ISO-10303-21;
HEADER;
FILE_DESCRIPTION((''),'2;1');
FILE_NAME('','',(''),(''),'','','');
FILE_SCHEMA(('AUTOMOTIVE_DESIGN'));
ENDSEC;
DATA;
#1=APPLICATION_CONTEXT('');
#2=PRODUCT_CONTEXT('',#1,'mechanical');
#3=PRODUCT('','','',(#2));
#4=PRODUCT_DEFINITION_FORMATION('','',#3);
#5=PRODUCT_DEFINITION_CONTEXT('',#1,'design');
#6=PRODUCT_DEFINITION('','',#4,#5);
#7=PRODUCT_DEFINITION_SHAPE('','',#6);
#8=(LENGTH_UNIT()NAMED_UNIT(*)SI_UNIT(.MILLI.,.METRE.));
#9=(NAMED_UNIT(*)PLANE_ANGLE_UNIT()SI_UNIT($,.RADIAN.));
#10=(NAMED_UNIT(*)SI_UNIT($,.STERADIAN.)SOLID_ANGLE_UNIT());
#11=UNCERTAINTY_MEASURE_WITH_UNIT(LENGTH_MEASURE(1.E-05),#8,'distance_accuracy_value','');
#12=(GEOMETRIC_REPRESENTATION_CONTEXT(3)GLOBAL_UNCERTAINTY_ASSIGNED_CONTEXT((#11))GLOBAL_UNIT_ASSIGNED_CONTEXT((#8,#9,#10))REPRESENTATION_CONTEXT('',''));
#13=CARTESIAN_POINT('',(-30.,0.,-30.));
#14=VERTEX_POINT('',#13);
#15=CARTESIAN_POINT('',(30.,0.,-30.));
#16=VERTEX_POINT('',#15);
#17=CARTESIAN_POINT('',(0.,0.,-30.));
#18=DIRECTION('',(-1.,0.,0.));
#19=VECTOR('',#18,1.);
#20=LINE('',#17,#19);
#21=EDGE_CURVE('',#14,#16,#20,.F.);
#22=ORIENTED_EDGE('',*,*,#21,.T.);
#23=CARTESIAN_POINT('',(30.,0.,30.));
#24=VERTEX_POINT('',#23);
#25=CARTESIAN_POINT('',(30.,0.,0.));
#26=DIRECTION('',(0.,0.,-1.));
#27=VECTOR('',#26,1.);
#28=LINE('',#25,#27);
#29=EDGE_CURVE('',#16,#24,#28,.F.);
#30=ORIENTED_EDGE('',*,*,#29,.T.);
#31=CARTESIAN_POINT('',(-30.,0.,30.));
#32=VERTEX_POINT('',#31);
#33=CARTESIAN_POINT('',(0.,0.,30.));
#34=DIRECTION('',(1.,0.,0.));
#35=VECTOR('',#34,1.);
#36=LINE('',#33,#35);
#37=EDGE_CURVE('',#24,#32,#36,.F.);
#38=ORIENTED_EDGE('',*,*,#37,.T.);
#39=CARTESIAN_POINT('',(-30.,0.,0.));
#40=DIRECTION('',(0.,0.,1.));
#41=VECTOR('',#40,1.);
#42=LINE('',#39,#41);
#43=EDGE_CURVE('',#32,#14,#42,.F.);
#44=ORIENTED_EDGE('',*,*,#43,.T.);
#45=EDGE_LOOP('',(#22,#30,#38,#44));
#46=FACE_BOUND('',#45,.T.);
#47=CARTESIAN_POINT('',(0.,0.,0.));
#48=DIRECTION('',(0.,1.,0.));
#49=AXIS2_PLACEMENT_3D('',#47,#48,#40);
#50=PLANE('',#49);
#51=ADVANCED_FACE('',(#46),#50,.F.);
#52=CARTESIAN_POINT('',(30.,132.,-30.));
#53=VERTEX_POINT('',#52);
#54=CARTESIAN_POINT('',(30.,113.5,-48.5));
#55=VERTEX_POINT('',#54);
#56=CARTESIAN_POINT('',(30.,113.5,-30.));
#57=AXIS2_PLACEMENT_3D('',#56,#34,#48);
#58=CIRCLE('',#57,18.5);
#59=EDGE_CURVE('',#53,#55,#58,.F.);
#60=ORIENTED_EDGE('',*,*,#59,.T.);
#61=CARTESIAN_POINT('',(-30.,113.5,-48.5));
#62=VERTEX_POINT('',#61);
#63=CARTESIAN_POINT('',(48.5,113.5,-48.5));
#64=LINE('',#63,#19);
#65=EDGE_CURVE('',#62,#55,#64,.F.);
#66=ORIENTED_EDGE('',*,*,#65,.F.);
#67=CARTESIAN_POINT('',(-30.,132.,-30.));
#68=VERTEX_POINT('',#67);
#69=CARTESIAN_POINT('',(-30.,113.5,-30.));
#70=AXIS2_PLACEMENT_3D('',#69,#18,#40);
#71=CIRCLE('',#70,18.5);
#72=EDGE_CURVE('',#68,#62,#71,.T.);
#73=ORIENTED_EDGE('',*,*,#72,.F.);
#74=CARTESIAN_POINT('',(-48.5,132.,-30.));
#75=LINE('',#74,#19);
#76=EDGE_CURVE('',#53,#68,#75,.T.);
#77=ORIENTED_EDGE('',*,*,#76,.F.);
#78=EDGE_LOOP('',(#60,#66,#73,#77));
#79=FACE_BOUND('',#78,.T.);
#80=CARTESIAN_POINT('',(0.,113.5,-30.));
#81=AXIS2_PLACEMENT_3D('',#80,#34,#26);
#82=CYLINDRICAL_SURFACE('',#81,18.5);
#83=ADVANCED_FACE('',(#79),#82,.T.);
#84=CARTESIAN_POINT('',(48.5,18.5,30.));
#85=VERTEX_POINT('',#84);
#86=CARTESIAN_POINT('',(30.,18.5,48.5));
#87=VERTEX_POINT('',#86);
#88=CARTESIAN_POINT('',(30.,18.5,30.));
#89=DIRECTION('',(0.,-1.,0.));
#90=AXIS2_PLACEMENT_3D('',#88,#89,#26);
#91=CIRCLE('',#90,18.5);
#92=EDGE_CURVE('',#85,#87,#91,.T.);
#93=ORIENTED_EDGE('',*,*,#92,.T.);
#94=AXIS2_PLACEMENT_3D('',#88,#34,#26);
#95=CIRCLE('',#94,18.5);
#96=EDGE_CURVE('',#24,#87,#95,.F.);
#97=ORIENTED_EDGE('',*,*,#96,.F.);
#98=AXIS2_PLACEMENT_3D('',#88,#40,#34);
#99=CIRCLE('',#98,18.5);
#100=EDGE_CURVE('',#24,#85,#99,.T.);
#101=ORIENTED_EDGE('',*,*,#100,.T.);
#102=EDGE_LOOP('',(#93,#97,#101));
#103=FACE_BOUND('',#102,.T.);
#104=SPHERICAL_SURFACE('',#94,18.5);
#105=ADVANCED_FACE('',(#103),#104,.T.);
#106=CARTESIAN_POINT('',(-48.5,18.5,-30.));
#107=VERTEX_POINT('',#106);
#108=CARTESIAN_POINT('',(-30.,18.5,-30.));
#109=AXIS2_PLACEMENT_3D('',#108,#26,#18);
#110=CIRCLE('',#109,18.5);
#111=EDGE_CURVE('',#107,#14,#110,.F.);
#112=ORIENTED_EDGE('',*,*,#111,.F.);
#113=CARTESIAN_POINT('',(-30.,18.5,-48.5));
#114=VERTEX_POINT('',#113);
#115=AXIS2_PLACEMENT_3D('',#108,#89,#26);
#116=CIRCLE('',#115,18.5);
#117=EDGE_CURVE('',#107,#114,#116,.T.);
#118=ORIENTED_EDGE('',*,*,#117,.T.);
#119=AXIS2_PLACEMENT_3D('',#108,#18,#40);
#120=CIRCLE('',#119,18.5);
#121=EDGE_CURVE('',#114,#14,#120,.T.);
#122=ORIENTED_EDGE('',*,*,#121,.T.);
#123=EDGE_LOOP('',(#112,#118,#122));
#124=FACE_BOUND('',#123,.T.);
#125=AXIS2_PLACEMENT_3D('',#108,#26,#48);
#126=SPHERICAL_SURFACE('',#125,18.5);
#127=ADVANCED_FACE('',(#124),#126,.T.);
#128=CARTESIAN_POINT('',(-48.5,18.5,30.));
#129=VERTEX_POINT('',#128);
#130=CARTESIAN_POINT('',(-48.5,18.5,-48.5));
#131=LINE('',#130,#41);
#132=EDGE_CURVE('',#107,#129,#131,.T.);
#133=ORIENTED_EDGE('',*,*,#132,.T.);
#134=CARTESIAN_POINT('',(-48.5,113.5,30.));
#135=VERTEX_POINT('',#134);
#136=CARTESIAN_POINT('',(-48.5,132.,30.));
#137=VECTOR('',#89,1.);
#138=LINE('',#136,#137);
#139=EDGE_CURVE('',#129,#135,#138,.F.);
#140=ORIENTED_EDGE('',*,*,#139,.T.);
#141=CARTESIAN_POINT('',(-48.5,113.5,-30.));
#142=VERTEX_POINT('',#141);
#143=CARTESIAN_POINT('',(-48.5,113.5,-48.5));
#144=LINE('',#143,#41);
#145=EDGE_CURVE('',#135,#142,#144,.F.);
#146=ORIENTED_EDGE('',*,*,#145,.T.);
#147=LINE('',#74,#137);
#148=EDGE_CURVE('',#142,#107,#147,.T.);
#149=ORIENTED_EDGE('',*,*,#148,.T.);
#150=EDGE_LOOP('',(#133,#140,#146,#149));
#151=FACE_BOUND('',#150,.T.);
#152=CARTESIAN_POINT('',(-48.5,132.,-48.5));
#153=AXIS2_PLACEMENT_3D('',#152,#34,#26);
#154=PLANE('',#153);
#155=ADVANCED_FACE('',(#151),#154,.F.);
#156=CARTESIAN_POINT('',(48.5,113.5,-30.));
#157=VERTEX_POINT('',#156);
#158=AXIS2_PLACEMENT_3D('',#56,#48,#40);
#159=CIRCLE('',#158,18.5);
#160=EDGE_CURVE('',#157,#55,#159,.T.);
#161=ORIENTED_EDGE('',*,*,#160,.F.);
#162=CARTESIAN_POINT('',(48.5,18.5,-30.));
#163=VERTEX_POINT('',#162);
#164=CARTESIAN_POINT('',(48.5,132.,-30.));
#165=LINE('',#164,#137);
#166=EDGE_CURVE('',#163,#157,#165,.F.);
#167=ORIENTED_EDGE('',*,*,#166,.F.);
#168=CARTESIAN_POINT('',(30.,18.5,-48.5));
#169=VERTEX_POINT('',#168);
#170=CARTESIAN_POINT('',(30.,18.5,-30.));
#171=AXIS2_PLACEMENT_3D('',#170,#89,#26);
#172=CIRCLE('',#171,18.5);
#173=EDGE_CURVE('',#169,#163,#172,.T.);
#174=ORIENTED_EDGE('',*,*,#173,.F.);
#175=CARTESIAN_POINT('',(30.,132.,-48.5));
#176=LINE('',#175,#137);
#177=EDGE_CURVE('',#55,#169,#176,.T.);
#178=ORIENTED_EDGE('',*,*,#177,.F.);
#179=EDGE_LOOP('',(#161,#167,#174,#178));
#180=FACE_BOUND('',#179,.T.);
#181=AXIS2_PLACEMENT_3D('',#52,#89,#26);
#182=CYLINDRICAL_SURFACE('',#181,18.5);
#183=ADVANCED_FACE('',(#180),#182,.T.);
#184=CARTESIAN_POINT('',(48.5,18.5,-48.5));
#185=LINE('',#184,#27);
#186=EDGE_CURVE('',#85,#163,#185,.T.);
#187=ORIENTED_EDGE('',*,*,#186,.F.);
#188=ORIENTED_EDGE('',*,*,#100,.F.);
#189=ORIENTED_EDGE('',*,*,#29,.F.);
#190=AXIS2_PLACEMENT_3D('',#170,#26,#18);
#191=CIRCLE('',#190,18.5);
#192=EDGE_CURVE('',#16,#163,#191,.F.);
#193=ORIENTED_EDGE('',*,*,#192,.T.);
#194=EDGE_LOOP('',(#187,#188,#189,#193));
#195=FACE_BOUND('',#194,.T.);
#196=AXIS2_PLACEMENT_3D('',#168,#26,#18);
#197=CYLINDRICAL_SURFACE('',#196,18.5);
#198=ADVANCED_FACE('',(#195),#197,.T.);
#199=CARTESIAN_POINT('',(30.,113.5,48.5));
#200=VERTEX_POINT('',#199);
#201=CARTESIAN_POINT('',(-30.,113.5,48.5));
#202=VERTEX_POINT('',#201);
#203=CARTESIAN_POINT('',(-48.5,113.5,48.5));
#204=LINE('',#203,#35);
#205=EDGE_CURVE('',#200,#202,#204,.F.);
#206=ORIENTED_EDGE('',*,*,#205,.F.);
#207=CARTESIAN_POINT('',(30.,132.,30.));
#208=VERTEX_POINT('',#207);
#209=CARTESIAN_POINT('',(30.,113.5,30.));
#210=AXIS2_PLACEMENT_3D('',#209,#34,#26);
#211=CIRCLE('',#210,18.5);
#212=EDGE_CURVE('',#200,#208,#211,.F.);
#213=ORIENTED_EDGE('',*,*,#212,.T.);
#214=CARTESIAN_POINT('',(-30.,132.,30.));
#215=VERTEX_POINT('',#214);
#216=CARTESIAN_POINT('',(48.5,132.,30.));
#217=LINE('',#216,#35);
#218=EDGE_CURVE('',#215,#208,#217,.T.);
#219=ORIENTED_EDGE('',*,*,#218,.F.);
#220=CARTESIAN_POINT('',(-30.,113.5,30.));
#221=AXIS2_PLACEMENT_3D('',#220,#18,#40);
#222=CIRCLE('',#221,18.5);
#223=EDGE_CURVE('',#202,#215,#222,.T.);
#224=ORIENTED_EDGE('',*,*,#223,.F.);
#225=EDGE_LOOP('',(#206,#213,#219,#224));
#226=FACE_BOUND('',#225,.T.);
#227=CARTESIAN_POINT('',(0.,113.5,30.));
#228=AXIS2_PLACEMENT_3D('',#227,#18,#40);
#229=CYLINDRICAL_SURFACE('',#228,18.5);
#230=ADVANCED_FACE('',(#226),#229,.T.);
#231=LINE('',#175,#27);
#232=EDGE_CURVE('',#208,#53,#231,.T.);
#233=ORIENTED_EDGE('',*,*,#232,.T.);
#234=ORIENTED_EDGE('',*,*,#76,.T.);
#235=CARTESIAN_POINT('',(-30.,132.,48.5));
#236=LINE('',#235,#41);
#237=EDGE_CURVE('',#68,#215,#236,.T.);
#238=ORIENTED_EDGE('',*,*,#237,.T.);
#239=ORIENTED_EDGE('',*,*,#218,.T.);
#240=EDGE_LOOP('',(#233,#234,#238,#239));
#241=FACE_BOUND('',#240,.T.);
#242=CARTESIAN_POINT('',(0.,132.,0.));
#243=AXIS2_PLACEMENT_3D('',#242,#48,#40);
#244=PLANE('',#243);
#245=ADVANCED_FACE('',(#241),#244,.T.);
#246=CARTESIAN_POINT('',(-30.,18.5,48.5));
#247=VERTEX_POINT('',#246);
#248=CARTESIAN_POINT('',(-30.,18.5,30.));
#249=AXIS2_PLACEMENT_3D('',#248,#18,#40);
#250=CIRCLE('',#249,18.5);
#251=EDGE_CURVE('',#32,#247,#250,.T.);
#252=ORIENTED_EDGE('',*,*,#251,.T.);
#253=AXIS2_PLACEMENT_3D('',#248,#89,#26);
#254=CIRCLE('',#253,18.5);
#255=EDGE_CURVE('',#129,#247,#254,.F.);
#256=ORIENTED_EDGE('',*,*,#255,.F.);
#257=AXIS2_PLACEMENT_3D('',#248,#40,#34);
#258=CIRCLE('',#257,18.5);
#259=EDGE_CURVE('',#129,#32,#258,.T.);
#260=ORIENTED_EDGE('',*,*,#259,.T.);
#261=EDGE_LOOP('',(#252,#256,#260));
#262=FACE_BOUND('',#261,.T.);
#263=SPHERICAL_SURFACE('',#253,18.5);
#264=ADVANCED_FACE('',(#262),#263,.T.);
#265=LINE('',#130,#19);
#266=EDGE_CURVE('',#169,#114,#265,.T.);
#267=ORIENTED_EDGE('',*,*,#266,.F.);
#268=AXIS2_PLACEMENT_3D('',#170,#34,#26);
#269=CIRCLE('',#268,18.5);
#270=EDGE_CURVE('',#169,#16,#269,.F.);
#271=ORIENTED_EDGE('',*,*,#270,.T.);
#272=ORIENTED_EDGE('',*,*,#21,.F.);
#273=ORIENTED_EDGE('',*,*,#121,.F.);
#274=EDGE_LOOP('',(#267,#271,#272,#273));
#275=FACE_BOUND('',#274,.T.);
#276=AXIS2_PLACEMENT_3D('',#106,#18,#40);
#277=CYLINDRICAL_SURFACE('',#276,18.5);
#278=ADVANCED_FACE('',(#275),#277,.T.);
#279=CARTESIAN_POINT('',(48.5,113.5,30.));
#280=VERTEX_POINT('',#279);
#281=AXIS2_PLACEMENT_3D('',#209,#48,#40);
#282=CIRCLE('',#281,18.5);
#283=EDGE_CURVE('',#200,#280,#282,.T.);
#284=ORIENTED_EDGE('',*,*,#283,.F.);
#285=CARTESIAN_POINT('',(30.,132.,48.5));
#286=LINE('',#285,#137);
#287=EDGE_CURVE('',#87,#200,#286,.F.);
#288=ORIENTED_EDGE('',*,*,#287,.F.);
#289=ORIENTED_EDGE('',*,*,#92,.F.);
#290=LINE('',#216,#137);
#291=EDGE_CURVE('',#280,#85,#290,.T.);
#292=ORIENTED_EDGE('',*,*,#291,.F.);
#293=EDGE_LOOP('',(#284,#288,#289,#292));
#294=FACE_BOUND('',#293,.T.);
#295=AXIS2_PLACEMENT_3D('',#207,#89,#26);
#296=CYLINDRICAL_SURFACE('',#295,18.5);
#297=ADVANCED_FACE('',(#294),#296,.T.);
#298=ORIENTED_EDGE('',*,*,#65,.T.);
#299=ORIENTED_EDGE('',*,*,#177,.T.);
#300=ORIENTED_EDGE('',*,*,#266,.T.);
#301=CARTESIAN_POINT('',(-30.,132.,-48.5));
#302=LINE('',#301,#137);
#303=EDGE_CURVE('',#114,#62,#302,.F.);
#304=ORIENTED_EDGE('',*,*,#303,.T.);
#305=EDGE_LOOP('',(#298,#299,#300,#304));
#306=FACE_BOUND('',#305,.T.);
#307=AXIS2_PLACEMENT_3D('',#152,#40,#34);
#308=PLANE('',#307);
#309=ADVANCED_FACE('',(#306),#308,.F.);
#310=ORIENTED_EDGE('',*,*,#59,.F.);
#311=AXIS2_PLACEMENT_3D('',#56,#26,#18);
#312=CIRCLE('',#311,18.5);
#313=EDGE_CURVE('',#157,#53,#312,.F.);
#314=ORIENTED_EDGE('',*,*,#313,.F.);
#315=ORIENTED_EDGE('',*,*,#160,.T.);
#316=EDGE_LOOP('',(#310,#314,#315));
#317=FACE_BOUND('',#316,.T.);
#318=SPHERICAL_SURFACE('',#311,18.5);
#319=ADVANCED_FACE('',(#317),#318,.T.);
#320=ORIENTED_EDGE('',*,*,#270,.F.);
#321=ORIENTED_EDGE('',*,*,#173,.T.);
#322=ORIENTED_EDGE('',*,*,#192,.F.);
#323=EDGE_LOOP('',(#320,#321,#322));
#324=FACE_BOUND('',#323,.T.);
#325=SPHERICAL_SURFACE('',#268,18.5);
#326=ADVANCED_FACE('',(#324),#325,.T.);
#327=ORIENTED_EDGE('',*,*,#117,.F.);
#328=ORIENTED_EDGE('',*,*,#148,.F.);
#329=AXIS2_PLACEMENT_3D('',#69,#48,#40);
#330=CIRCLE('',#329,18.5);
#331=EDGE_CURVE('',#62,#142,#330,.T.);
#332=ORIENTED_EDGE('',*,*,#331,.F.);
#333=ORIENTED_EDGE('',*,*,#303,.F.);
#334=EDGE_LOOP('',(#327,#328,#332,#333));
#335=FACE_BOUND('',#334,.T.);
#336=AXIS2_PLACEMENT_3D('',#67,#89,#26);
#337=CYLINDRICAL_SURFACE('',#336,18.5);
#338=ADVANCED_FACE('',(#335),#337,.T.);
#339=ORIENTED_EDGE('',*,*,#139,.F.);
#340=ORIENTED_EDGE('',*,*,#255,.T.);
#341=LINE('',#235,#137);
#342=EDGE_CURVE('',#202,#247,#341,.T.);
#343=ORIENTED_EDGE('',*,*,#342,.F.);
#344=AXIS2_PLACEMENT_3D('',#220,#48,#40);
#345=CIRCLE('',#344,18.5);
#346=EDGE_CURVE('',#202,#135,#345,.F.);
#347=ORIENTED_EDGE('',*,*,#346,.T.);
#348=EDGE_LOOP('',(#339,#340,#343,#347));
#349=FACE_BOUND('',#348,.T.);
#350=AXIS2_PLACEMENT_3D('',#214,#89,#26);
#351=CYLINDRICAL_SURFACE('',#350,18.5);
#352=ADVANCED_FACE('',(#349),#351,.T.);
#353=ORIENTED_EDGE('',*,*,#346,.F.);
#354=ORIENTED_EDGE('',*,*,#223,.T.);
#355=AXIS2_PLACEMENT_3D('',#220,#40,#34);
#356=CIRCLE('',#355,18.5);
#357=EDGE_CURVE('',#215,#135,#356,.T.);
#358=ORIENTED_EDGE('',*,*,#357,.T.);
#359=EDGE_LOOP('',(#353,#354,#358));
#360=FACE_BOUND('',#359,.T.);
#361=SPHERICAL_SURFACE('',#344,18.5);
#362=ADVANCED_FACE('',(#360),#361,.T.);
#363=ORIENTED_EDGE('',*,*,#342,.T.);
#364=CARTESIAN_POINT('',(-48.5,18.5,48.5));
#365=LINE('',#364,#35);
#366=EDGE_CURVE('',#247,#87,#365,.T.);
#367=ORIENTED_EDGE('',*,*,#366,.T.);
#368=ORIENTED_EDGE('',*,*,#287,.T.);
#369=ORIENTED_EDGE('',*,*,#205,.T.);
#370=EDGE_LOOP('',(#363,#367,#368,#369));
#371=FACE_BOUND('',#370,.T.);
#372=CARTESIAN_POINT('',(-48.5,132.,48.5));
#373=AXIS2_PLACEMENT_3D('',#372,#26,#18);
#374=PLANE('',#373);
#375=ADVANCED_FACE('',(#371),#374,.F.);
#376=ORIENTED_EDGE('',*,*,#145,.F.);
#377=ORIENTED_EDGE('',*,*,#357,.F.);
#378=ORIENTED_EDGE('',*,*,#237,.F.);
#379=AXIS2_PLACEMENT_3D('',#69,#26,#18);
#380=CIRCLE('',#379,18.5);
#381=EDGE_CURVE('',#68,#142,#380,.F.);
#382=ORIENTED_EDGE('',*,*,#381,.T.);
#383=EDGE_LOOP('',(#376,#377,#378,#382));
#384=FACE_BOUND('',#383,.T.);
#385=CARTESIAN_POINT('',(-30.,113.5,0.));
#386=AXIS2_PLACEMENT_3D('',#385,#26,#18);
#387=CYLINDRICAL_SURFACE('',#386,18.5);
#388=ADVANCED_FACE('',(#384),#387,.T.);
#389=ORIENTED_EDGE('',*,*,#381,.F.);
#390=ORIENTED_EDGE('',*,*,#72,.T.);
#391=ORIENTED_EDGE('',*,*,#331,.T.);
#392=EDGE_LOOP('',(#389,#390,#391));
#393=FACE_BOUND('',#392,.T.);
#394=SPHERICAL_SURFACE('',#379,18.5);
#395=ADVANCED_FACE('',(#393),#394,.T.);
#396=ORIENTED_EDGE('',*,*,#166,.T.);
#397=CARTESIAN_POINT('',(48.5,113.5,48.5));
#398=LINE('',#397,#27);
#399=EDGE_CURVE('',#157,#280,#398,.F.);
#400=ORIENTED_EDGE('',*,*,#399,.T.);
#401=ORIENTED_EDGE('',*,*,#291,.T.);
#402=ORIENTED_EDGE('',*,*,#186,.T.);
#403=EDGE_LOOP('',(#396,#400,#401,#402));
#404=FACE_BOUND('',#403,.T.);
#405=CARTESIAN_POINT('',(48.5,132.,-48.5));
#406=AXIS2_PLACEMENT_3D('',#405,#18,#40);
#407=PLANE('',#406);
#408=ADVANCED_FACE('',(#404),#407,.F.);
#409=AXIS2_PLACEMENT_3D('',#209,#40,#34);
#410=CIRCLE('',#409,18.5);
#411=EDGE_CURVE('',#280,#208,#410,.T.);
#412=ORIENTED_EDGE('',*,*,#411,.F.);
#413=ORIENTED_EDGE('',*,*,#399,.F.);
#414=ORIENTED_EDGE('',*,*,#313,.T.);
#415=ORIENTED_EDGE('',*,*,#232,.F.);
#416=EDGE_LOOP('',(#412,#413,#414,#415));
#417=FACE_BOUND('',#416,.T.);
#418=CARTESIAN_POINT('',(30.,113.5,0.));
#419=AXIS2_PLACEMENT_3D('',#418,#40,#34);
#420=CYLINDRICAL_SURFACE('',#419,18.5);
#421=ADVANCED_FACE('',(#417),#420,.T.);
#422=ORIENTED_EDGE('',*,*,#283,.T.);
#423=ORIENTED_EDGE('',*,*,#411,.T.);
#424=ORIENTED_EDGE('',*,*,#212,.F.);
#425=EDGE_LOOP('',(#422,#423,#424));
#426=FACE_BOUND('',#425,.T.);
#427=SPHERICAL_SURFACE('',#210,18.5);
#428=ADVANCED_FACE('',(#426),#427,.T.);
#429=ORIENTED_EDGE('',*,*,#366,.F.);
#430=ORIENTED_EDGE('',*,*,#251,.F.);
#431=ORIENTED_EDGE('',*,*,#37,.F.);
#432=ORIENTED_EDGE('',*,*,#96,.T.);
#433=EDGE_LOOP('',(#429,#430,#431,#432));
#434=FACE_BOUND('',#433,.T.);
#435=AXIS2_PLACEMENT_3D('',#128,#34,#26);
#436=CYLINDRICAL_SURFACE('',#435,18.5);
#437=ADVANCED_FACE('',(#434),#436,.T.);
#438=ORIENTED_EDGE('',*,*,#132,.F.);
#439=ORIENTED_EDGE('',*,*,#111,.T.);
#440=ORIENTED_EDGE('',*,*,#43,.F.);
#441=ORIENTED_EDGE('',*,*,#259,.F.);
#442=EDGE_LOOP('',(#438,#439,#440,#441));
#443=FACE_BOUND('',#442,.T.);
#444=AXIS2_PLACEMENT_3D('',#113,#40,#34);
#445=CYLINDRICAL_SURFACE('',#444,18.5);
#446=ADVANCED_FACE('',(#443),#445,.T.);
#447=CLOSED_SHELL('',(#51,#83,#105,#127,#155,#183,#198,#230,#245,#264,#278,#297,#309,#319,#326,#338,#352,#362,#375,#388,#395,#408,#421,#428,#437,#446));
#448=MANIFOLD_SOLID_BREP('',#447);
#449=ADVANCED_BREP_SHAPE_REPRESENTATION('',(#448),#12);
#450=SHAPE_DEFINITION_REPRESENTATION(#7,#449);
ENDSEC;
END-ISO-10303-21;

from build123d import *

# Parameters (mm, degrees)
SKETCH1_W           = 97
SKETCH1_H           = 97
BOSS_EXTRUDE1_DEPTH = 132
FILLET1_R           = 18.5


with BuildPart() as part:
    # Sketch1 → Boss-Extrude1 (new body)
    with BuildSketch(Plane(origin=(0, 0, 0), x_dir=(1, 0, 0), z_dir=(0, 1, 0))):
        Rectangle(SKETCH1_W, SKETCH1_H)
    extrude(amount=BOSS_EXTRUDE1_DEPTH)

    # Fillet1
    fillet1_edges = [part.edges().sort_by_distance(p)[0] for p in [
        (48.5, 132, 0),
        (0, 132, -48.5),
        (-48.5, 132, 0),
        (0, 0, -48.5),
        (48.5, 0, 0),
        (0, 0, 48.5),
        (-48.5, 0, 0),
        (-48.5, 66, -48.5),
        (48.5, 66, -48.5),
        (48.5, 66, 48.5),
        (-48.5, 66, 48.5),
        (0, 132, 48.5),
    ]]
    fillet(fillet1_edges, radius=FILLET1_R)


solid = part.part
